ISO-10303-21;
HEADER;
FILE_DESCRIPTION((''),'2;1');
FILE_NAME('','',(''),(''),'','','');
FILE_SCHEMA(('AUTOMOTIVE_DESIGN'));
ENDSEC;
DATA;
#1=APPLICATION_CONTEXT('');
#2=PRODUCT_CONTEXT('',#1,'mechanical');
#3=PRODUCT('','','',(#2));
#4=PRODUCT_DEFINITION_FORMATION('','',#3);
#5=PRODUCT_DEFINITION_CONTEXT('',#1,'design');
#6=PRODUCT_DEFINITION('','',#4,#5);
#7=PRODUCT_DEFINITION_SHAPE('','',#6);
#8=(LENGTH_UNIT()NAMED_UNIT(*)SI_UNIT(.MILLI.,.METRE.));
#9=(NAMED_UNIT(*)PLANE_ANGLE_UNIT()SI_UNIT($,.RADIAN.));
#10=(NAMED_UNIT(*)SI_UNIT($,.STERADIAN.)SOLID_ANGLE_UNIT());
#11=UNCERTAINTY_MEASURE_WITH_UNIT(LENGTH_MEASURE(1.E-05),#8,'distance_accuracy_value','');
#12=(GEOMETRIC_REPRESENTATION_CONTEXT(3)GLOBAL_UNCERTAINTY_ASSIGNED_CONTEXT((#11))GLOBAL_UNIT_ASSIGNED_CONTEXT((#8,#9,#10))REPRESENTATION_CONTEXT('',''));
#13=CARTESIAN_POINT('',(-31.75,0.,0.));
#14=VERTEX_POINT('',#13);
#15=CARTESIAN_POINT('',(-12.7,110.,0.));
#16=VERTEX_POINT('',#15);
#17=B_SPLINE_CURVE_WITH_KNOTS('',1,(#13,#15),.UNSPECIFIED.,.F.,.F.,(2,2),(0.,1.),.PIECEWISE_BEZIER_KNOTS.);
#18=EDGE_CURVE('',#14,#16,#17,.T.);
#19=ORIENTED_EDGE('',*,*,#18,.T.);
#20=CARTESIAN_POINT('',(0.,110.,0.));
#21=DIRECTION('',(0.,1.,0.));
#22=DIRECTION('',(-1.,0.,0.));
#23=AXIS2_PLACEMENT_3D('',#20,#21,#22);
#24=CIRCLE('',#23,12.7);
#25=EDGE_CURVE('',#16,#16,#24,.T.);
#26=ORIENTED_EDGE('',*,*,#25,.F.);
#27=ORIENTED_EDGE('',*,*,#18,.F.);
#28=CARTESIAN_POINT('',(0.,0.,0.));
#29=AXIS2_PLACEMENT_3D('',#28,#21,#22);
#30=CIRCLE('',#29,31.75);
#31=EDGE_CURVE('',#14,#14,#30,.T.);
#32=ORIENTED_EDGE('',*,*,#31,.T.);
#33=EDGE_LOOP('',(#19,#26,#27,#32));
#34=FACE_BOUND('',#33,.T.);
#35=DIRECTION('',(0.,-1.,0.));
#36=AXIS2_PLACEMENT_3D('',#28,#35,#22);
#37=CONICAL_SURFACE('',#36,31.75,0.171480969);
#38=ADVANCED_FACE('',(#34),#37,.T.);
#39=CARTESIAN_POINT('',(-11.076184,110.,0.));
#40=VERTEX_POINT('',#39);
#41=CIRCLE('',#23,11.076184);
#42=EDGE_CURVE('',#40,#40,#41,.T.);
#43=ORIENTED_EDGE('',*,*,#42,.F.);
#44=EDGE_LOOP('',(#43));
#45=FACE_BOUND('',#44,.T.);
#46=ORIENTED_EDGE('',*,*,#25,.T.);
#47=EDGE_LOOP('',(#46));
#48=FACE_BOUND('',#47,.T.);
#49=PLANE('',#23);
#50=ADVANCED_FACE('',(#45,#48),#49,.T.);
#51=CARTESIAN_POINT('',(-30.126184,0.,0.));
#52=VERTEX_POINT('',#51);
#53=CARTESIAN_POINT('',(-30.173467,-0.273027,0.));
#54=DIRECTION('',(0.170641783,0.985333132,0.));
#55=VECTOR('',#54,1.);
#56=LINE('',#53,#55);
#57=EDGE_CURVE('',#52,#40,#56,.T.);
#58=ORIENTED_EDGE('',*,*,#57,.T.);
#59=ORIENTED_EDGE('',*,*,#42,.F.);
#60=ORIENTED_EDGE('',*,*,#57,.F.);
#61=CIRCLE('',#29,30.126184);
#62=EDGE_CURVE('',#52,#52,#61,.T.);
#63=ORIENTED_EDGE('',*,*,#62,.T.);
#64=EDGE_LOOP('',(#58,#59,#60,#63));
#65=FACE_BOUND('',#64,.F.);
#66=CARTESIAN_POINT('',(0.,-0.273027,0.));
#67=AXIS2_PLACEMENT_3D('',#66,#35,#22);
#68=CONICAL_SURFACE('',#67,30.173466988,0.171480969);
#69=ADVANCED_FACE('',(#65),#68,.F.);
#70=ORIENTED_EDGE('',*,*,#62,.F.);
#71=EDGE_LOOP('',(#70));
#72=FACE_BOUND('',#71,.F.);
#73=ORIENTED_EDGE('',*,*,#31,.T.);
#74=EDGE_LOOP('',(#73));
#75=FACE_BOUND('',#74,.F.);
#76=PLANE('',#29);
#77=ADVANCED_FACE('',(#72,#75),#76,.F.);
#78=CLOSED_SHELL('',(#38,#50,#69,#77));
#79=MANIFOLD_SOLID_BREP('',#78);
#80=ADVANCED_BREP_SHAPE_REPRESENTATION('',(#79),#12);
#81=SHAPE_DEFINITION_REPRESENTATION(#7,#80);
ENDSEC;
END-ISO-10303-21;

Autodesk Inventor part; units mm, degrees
ref_plane "YZ Plane" through (0, 0, 0) normal (1, 0, 0) x (0, 1, 0)
ref_plane "XY Plane" through (0, 0, 0) normal (0, 0, 1) x (1, 0, 0)
sketch "Szkic6" plane through (0, 0, 0) normal (0, 1, 0) x (-1, 0, 0)
  circle A0 centre (0, 0) radius 31.75
  dimension "d33" = 63.5
ref_plane "Płaszczyzna konstrukcyjna1" through (0, 110, 0) normal (0, 1, 0) x (-1, 0, 0)
sketch "Szkic7" plane through (0, 110, 0) normal (0, 1, 0) x (-1, 0, 0)
  circle A0 centre (0, 0) radius 12.7
  dimension "d35" = 25.4
loft "Wyciągnięcie złożone1" add profiles "Szkic6", "Szkic7"
shell "Skorupa1" thickness 1.6 removed faces 2 at (3.6254, 110, -0.9542) at (14.3997, 0, 5.5289)
equation "\"d33\" = OD1"
equation "\"d35\" = OD2"
equation "\"d52\" = THK"
equation "\"SzerokośćGięciaPodcięcia\" = Grubość"
equation "\"RozmiarPodcięciaNarożnika\" = 4 * Grubość"
equation "\"PromieńPrzejścia\" = PromieńGięcia"
equation "\"Rozmiar_promienia_Jacobiego\" = PromieńGięcia"
equation "\"Wielk_odstępu\" = Grubość"
equation "\"d2\" = PromieńGięcia"
equation "\"d23\" = PromieńGięcia"
equation "\"OD1\" = 63.5"
equation "\"OD2\" = 25.4"
equation "\"THK\" = 1.6"
equation "\"Grubość\" = 1.5"
equation "\"PromieńGięcia\" = 3"
properties part number "Redukcja symetryczna Ø63,5x25,4x1,6 L=110" material "304"
